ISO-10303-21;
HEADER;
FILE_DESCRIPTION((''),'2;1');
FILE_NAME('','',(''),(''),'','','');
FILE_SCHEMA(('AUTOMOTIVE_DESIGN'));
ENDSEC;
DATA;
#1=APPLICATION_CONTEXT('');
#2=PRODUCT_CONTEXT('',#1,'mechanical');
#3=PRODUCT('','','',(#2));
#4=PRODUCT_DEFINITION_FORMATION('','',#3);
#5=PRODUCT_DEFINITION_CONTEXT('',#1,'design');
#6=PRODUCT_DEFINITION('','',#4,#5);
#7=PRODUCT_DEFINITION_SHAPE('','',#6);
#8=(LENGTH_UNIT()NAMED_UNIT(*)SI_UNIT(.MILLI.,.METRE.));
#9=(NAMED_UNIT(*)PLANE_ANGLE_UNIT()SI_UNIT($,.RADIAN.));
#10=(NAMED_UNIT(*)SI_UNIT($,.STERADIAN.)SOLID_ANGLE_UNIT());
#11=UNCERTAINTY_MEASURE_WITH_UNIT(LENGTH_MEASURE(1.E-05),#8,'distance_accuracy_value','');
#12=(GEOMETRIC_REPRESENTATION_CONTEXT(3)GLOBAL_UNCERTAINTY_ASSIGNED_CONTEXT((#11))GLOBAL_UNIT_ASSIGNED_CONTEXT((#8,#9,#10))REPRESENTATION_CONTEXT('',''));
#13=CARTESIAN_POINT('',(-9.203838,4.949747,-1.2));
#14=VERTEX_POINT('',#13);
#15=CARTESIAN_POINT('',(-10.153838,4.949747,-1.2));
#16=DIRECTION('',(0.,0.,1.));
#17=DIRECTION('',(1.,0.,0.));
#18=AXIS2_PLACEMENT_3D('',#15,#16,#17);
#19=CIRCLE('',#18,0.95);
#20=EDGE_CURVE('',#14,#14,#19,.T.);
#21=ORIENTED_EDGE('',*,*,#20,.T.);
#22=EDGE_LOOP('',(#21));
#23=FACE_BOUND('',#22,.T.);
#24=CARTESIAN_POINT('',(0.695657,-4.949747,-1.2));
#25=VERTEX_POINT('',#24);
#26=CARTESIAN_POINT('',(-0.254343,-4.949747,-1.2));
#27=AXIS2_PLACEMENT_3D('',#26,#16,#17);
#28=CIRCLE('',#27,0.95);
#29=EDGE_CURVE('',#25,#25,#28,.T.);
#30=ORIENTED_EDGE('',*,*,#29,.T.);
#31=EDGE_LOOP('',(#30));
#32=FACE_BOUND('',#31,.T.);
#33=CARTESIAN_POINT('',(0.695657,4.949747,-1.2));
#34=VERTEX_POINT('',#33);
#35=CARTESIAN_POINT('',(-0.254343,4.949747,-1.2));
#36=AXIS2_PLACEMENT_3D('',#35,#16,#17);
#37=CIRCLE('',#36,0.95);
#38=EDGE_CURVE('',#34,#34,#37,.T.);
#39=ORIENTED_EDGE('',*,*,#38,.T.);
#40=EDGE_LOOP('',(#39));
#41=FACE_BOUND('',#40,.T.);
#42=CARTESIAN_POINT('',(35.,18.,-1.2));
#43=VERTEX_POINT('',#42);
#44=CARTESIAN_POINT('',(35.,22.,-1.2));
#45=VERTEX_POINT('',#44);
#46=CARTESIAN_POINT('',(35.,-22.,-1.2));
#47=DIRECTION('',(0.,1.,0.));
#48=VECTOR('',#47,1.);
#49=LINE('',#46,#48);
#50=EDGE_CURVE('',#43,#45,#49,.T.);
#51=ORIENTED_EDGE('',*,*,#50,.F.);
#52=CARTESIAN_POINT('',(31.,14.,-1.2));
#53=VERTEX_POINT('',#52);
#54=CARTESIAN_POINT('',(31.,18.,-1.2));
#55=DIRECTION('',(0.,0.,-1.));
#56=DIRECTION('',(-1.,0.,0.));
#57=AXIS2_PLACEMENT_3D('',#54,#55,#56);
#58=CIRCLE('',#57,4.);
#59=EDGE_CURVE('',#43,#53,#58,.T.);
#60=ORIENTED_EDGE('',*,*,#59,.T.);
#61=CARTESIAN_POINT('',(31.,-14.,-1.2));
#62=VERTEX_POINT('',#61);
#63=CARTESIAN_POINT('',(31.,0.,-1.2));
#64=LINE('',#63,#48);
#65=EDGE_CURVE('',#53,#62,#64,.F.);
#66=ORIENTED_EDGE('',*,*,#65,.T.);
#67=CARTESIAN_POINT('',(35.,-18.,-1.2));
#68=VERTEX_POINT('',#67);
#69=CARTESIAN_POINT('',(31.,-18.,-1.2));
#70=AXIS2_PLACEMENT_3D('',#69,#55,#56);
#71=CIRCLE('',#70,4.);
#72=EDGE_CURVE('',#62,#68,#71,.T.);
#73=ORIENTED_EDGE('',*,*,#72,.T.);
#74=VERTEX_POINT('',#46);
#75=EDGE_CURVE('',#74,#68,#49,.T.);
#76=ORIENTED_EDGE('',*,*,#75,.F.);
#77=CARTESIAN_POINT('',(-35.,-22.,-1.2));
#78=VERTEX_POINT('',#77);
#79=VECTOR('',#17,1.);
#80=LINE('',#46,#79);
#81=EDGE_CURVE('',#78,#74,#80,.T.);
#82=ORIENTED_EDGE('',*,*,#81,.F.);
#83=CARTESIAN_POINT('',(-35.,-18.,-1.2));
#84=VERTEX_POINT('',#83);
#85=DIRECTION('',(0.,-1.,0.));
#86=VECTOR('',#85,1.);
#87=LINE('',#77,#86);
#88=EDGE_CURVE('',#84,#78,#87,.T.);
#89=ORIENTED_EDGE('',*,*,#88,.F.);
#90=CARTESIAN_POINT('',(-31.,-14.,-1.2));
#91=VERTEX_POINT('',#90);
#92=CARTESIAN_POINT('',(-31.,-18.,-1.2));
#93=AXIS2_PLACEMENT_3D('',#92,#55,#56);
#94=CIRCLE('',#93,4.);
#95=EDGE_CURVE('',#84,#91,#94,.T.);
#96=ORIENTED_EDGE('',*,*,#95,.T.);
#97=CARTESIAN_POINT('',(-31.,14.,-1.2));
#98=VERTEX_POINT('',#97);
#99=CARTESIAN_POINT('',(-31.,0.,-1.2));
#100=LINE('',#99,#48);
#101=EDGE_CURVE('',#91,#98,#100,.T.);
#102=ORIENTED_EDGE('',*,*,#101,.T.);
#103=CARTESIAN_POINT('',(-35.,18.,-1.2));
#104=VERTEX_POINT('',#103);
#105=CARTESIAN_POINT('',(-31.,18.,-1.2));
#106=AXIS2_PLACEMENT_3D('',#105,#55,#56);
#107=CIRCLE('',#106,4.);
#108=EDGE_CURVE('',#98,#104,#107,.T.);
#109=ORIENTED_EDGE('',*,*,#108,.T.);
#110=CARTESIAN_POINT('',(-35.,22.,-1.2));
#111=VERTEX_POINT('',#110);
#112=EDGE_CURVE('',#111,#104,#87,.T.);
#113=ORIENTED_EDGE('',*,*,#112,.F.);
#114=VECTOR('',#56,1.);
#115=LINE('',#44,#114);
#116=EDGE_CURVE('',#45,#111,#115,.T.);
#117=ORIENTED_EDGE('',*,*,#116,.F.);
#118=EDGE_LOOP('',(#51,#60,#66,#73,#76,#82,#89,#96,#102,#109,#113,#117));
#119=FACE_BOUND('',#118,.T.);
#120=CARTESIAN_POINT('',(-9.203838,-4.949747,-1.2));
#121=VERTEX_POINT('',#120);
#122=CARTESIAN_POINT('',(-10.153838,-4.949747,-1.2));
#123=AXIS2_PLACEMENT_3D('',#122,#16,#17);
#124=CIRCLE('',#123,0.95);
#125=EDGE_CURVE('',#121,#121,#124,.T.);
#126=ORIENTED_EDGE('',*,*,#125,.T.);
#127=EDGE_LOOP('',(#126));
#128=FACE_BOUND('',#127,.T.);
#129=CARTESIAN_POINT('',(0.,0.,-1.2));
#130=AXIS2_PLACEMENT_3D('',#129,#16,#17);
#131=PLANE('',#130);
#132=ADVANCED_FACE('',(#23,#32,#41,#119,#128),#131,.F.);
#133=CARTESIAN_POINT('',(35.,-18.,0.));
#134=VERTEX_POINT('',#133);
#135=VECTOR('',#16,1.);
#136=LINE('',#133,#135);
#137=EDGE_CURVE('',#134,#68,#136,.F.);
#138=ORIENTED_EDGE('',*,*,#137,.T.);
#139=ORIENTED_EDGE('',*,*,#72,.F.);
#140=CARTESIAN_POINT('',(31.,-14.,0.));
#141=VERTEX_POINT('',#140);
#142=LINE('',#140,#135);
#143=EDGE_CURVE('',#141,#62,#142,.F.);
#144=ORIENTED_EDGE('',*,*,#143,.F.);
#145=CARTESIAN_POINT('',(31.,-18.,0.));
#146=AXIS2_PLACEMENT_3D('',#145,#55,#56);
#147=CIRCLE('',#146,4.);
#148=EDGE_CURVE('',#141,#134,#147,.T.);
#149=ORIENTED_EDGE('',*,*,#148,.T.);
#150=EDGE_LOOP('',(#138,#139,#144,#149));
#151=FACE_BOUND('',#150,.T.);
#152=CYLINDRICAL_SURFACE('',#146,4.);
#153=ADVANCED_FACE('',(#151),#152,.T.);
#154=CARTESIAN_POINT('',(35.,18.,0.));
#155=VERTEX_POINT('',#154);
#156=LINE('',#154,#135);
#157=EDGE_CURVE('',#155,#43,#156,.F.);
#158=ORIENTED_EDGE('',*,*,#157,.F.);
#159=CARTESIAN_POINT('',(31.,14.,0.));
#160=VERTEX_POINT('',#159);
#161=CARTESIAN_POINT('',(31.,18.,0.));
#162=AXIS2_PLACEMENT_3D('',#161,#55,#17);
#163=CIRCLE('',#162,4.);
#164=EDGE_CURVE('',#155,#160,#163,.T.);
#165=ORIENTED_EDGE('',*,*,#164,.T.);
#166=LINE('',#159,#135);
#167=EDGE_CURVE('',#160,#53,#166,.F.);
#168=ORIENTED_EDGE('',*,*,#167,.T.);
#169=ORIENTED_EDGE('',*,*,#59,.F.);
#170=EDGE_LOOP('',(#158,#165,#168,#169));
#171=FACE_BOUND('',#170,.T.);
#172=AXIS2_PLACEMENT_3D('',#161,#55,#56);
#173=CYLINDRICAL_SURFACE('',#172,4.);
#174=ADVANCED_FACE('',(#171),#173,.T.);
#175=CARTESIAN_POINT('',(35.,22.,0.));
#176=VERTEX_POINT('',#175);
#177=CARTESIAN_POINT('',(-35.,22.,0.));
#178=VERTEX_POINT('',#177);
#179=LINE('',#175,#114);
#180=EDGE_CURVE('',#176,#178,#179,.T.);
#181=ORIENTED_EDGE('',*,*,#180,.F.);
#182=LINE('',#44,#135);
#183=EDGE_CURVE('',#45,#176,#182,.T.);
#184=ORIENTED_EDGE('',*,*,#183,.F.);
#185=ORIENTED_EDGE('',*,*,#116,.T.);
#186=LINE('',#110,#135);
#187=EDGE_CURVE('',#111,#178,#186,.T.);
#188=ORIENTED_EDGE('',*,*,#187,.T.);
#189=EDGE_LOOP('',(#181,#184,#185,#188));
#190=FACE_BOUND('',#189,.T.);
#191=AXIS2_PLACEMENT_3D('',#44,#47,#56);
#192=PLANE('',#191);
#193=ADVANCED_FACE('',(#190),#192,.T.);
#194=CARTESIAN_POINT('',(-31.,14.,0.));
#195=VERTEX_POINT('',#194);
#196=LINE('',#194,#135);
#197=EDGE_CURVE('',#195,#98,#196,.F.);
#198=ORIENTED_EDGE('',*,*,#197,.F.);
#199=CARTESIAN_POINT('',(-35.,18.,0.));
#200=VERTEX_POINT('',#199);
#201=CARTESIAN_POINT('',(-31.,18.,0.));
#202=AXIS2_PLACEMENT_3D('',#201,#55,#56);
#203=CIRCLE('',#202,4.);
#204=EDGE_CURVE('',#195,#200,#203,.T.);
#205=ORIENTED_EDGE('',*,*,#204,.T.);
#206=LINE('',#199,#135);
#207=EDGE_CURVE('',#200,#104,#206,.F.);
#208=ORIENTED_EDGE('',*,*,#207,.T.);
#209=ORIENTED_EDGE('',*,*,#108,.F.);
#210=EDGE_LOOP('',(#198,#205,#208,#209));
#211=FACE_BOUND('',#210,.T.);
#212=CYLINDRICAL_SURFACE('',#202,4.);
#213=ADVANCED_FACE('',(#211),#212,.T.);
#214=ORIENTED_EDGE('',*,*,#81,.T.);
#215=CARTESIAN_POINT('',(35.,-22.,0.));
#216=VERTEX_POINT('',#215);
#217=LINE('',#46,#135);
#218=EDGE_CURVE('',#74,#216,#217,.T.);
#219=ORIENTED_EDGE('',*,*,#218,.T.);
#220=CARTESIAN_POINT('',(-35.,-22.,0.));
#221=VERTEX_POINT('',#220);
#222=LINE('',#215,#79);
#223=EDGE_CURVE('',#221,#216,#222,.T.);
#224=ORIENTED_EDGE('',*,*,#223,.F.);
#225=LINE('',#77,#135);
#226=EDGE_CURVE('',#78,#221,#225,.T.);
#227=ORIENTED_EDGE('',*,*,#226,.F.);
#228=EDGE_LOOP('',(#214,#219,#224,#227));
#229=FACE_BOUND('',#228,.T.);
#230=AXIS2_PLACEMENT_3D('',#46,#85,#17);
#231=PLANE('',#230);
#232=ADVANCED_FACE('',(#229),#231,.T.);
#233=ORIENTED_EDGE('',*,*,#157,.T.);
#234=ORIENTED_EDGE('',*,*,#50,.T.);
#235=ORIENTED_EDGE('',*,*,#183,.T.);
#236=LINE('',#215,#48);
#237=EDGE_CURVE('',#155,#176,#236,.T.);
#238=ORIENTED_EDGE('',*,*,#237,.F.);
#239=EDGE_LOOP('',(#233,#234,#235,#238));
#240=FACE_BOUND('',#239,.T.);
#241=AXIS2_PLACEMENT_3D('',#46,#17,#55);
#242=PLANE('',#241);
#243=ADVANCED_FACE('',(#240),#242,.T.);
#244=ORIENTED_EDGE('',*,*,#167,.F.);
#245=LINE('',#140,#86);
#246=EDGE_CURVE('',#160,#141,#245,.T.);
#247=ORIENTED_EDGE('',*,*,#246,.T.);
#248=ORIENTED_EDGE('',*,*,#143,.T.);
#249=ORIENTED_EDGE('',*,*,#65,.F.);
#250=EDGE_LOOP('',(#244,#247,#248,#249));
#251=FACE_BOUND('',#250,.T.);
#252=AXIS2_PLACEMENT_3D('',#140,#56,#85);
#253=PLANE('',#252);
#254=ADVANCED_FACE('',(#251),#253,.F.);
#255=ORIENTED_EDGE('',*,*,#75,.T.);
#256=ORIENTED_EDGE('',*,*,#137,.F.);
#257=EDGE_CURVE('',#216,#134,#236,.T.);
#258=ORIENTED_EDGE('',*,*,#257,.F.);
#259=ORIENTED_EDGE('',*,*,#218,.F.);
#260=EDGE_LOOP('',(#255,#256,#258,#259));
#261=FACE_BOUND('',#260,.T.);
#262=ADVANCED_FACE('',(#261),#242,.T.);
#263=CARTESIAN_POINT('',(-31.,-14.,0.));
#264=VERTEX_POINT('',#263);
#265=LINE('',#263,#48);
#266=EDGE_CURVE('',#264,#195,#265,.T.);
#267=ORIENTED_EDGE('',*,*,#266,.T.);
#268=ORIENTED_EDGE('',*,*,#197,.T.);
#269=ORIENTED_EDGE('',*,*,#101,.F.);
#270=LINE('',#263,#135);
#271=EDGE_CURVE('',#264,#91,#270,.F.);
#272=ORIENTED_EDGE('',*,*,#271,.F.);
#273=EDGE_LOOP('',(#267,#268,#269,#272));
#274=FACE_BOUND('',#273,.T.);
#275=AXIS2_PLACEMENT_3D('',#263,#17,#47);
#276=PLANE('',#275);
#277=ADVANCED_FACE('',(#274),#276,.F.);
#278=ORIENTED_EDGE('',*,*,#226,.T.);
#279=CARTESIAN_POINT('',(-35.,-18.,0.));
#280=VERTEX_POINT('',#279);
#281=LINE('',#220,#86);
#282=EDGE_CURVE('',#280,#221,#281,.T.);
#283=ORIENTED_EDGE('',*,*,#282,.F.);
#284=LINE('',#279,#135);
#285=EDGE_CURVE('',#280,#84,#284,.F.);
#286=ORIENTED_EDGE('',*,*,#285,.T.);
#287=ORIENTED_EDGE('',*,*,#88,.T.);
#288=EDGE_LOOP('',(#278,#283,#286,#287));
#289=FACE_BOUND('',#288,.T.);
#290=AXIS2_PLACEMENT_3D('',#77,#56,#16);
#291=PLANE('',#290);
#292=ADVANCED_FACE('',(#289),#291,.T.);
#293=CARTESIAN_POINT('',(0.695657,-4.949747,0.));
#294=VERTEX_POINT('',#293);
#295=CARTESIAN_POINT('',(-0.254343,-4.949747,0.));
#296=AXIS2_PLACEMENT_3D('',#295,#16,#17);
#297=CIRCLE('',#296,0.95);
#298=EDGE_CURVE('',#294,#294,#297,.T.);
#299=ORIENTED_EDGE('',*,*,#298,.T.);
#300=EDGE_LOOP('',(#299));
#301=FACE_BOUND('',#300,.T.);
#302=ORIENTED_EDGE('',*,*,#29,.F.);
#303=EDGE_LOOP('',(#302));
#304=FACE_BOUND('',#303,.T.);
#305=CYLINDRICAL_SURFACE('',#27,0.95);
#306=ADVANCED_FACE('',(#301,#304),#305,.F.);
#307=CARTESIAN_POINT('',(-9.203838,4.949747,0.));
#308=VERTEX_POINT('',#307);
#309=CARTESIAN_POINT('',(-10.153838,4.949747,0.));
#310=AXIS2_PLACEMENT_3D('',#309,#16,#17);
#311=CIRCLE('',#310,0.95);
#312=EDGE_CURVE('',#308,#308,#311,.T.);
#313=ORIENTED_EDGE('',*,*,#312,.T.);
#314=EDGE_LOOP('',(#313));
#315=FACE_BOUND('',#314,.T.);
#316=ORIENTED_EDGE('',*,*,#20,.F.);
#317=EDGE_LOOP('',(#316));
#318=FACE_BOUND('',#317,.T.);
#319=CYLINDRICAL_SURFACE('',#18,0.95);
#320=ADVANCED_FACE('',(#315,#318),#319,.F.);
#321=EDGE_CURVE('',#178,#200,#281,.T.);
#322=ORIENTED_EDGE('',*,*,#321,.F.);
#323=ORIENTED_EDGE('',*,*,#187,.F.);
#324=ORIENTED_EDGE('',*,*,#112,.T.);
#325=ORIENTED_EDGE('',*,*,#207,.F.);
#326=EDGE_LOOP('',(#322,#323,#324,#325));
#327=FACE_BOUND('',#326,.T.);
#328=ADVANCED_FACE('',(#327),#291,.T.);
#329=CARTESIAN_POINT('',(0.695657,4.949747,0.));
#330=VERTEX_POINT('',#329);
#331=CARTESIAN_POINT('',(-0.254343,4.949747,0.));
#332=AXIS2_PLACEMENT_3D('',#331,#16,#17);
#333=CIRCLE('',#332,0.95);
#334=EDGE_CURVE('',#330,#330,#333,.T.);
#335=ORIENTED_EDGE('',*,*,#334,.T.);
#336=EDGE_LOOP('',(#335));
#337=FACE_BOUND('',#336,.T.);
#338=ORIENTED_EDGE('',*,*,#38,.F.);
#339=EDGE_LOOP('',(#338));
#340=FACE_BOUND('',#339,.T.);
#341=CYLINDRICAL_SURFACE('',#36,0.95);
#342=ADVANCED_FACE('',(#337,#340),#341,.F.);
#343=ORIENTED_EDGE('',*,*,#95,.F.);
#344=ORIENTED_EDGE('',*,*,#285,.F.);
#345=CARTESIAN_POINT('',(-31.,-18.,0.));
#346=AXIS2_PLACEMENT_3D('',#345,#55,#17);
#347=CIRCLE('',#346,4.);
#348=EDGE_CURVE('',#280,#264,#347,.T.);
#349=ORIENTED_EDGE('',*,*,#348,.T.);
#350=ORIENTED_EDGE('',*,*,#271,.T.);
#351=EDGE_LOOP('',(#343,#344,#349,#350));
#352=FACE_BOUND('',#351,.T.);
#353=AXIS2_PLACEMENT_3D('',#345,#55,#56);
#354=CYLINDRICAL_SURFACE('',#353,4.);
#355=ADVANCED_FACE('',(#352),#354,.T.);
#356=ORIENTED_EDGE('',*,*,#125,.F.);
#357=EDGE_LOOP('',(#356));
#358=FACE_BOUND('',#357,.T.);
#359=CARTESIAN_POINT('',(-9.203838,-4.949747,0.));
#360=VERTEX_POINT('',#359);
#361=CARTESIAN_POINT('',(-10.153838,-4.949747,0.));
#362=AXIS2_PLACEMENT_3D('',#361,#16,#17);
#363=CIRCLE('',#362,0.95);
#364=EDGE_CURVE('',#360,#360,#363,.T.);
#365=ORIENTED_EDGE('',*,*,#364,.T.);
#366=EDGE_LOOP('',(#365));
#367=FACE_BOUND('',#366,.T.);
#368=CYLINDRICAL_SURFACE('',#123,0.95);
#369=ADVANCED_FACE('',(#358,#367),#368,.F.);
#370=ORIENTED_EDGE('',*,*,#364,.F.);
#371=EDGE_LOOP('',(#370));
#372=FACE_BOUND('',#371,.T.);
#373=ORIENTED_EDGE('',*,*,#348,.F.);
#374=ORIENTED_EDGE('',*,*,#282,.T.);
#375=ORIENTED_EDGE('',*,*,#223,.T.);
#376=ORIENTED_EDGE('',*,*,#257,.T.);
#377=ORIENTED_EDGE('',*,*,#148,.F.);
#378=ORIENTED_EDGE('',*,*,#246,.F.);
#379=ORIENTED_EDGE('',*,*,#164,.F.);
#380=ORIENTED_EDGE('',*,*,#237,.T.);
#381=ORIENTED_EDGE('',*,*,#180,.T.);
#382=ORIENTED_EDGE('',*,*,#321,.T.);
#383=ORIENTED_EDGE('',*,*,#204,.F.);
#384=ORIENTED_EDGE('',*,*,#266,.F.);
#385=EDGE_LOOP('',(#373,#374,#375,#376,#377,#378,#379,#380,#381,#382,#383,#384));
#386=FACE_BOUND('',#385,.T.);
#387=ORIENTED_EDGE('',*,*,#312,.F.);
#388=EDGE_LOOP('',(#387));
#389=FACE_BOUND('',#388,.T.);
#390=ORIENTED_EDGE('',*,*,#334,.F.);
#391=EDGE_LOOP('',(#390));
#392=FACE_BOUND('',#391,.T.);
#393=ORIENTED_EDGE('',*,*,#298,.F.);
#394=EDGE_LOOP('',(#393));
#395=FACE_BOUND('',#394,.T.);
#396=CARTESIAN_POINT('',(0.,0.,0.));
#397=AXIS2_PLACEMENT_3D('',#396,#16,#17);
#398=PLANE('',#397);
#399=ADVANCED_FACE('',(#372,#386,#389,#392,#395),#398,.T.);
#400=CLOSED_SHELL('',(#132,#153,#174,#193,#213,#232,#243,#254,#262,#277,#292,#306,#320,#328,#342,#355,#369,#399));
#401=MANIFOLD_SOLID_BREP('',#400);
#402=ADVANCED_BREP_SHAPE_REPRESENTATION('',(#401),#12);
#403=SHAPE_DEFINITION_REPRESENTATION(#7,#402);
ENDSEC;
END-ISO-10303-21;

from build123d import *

# Parameters (mm, degrees)
SKETCH_2_W             = 70
SKETCH_2_H             = 44
SM_BASE_FLANGE_1_DEPTH = 1.2
CUT_EXTRUDE_1_DEPTH    = 42.357466073
SKETCH_6_R             = 0.95
CUT_EXTRUDE_2_DEPTH    = 42.357466073


# Sheet-metal steps are written as plain solids
with BuildPart() as part:
    # 草图2 → 基体-法兰1 (new body)
    with BuildSketch(Plane.XY):
        Rectangle(SKETCH_2_W, SKETCH_2_H)
    extrude(amount=-SM_BASE_FLANGE_1_DEPTH)

    # 草图5 → 切除-拉伸1 (cut, through all)
    with BuildSketch(Plane.XY):
        with BuildLine():
            Line((39, -14), (35, -14))
            Line((35, -14), (35, -18))
            ThreePointArc((35, -18), (33.828427125, -15.171572875), (31, -14))
            Line((31, -14), (31, 14))
            ThreePointArc((31, 14), (33.828427125, 15.171572875), (35, 18))
            Line((35, 18), (35, 14))
            Line((35, 14), (39, 14))
            Line((39, 14), (39, -14))
        make_face()
        with BuildLine():
            Line((-39, -14), (-39, 14))
            Line((-39, 14), (-35, 14))
            Line((-35, 14), (-35, 18))
            ThreePointArc((-35, 18), (-33.828427125, 15.171572875), (-31, 14))
            Line((-31, 14), (-31, -14))
            ThreePointArc((-31, -14), (-33.828427125, -15.171572875), (-35, -18))
            Line((-35, -18), (-35, -14))
            Line((-35, -14), (-39, -14))
        make_face()
    extrude(amount=-CUT_EXTRUDE_1_DEPTH, mode=Mode.SUBTRACT)

    # 草图6 → 切除-拉伸2 (cut, through all)
    with BuildSketch(Plane.XY):
        with Locations((-10.153838394, 4.949747468)):
            Circle(SKETCH_6_R)
        with Locations((-0.254343457, 4.949747468)):
            Circle(SKETCH_6_R)
        with Locations((-0.254343457, -4.949747468)):
            Circle(SKETCH_6_R)
        with Locations((-10.153838394, -4.949747468)):
            Circle(SKETCH_6_R)
    extrude(amount=-CUT_EXTRUDE_2_DEPTH, mode=Mode.SUBTRACT)


solid = part.part
